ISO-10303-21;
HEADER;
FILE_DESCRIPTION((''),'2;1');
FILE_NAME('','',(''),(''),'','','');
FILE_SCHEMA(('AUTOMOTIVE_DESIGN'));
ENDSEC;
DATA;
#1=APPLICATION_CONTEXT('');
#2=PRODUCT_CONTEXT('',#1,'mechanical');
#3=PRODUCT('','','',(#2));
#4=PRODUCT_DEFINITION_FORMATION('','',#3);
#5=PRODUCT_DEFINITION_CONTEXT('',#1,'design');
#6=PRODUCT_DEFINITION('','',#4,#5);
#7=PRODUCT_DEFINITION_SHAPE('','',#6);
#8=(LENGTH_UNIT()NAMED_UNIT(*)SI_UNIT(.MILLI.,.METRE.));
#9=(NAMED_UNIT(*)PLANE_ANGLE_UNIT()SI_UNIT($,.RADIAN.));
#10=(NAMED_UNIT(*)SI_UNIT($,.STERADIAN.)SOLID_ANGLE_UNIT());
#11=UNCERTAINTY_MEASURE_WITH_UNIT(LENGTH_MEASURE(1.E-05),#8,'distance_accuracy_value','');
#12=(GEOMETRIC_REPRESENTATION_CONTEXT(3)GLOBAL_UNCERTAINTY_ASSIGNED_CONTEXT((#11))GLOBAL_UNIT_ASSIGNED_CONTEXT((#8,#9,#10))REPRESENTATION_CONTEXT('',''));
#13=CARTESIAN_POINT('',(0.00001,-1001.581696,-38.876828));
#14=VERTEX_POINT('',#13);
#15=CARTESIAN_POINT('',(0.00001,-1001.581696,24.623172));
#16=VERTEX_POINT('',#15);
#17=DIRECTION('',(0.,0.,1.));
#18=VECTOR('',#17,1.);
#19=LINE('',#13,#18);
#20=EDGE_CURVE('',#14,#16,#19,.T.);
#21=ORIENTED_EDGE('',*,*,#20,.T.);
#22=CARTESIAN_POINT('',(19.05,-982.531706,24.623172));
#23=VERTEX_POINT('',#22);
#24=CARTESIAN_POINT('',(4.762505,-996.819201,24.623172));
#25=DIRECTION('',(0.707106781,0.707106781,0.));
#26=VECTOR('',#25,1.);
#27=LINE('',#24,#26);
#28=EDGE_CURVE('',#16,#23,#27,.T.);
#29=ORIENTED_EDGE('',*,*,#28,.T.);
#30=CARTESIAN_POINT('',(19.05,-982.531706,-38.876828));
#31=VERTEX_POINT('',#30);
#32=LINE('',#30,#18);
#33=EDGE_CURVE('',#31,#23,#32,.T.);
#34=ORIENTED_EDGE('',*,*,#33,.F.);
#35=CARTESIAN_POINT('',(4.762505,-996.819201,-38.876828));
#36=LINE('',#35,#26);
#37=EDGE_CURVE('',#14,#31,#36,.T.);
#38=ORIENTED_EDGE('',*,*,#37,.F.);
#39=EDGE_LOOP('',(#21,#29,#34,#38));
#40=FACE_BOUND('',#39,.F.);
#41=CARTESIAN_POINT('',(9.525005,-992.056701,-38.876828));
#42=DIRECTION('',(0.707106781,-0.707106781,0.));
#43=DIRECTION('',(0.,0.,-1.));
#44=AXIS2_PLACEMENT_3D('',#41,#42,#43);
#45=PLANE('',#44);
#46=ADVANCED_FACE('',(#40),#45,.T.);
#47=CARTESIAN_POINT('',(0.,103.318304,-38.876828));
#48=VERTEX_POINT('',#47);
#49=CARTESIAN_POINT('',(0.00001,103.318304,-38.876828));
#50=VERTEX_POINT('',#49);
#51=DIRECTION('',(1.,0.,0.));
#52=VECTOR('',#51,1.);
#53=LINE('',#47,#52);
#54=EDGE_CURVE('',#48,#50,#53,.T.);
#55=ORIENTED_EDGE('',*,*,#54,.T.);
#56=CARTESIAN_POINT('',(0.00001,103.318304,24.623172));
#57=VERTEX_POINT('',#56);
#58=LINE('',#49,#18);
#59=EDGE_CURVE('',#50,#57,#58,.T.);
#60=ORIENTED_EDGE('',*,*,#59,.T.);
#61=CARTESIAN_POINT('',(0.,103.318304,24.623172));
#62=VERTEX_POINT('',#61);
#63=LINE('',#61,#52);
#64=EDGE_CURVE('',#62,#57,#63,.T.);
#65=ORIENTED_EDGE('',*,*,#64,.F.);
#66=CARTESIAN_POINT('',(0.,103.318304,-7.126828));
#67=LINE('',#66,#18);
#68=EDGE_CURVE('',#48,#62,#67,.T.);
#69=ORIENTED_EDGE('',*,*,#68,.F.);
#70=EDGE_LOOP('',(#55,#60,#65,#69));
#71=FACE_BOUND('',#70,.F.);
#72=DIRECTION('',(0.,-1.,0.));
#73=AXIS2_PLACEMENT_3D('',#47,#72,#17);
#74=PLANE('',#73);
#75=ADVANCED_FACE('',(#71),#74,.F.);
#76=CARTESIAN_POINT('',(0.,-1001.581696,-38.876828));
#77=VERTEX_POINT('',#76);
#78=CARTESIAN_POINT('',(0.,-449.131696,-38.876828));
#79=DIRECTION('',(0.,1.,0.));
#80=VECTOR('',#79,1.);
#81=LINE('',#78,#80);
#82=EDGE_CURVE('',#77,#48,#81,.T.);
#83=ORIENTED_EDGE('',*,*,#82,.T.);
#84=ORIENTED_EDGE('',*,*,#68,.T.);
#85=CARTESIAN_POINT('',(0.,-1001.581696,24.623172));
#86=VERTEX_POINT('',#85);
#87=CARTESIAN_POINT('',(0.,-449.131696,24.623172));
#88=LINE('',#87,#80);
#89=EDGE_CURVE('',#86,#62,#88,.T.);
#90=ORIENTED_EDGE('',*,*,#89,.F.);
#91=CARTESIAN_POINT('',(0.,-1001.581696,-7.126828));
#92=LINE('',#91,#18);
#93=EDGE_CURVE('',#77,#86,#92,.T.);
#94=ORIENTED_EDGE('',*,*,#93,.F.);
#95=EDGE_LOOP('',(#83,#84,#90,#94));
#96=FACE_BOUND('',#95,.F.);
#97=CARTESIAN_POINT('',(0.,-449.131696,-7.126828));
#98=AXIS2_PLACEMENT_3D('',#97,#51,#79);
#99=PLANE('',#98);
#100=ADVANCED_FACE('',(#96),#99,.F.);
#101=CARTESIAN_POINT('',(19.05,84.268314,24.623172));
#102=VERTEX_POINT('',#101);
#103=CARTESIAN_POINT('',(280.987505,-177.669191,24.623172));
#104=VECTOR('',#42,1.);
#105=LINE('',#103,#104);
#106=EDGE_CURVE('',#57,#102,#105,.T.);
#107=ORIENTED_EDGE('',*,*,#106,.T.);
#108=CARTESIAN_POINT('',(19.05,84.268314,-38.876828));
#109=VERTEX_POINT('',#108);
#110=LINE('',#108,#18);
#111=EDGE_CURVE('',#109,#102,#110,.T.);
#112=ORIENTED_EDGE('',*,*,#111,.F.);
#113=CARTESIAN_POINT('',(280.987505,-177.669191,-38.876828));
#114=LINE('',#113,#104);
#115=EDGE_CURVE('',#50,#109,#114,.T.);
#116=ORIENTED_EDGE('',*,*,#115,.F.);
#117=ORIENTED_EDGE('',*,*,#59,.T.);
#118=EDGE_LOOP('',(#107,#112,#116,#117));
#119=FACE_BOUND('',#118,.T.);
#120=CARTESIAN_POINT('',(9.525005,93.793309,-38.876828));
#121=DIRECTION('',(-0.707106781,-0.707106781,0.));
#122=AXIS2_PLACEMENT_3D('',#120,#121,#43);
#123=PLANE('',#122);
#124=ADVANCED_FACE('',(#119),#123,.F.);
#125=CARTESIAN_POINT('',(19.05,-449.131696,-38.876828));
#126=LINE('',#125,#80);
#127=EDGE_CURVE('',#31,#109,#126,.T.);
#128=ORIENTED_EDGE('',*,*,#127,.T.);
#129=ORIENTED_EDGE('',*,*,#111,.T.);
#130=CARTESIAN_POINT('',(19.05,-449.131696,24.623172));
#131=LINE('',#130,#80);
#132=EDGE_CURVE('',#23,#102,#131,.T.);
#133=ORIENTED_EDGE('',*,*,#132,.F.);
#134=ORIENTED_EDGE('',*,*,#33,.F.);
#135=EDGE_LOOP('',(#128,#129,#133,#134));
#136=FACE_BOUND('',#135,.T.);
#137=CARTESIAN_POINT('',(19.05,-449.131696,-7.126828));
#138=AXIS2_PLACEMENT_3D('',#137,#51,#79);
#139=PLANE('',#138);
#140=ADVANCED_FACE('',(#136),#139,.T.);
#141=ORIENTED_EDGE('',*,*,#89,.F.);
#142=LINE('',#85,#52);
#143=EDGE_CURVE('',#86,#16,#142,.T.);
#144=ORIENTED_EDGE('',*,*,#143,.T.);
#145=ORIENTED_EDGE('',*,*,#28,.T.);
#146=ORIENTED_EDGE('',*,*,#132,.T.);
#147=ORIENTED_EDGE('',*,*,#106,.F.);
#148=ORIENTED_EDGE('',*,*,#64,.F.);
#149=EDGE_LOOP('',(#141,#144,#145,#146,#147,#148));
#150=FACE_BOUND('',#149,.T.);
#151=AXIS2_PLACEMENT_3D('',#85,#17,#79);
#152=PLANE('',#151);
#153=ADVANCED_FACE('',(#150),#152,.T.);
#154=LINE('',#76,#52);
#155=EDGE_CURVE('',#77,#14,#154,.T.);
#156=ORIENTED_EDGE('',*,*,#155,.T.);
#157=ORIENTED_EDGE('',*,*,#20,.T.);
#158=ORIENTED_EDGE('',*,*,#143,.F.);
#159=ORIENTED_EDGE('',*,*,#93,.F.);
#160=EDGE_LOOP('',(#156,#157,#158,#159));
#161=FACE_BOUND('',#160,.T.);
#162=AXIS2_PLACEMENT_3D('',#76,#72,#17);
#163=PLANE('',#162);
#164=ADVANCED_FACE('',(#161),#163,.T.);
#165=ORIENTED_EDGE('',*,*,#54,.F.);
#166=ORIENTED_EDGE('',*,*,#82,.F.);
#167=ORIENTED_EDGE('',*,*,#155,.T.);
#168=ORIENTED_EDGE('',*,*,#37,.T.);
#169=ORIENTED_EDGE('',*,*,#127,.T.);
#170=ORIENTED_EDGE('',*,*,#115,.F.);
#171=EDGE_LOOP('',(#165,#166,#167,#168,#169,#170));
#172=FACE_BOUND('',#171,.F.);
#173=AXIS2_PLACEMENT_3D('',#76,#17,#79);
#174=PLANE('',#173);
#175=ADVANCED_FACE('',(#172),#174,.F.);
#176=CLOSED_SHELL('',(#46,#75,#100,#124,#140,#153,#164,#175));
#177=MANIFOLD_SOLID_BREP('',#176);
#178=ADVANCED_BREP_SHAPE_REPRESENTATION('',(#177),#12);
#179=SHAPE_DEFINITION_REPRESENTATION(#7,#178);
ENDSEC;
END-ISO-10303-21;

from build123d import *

# Parameters (mm, degrees)
F0_W     = 1104.9
F0_H     = 63.5
F1_DEPTH = 19.05
F2_SIZE  = 19.04999


# Not quite as in the source:
# - a fillet or chamfer is up to 0.001 mm smaller than in the source, because OpenCascade refuses the exact size


with BuildPart() as f1:
    # F0 (on Right) → F1 (new body)
    with BuildSketch(Plane.YZ):
        with Locations((-449.1316961765, -7.1268278062)):
            Rectangle(F0_W, F0_H)
    extrude(amount=F1_DEPTH)

    # F2 (size 19.05 in the source; OpenCascade refuses exactly that, so slightly less here)
    f2_edges = [f1.edges().sort_by_distance(p)[0] for p in [
        (19.05, -1001.581696, -7.126828),
        (19.05, 103.318304, -7.126828),
    ]]
    chamfer(f2_edges, length=F2_SIZE)


solid = f1.part
